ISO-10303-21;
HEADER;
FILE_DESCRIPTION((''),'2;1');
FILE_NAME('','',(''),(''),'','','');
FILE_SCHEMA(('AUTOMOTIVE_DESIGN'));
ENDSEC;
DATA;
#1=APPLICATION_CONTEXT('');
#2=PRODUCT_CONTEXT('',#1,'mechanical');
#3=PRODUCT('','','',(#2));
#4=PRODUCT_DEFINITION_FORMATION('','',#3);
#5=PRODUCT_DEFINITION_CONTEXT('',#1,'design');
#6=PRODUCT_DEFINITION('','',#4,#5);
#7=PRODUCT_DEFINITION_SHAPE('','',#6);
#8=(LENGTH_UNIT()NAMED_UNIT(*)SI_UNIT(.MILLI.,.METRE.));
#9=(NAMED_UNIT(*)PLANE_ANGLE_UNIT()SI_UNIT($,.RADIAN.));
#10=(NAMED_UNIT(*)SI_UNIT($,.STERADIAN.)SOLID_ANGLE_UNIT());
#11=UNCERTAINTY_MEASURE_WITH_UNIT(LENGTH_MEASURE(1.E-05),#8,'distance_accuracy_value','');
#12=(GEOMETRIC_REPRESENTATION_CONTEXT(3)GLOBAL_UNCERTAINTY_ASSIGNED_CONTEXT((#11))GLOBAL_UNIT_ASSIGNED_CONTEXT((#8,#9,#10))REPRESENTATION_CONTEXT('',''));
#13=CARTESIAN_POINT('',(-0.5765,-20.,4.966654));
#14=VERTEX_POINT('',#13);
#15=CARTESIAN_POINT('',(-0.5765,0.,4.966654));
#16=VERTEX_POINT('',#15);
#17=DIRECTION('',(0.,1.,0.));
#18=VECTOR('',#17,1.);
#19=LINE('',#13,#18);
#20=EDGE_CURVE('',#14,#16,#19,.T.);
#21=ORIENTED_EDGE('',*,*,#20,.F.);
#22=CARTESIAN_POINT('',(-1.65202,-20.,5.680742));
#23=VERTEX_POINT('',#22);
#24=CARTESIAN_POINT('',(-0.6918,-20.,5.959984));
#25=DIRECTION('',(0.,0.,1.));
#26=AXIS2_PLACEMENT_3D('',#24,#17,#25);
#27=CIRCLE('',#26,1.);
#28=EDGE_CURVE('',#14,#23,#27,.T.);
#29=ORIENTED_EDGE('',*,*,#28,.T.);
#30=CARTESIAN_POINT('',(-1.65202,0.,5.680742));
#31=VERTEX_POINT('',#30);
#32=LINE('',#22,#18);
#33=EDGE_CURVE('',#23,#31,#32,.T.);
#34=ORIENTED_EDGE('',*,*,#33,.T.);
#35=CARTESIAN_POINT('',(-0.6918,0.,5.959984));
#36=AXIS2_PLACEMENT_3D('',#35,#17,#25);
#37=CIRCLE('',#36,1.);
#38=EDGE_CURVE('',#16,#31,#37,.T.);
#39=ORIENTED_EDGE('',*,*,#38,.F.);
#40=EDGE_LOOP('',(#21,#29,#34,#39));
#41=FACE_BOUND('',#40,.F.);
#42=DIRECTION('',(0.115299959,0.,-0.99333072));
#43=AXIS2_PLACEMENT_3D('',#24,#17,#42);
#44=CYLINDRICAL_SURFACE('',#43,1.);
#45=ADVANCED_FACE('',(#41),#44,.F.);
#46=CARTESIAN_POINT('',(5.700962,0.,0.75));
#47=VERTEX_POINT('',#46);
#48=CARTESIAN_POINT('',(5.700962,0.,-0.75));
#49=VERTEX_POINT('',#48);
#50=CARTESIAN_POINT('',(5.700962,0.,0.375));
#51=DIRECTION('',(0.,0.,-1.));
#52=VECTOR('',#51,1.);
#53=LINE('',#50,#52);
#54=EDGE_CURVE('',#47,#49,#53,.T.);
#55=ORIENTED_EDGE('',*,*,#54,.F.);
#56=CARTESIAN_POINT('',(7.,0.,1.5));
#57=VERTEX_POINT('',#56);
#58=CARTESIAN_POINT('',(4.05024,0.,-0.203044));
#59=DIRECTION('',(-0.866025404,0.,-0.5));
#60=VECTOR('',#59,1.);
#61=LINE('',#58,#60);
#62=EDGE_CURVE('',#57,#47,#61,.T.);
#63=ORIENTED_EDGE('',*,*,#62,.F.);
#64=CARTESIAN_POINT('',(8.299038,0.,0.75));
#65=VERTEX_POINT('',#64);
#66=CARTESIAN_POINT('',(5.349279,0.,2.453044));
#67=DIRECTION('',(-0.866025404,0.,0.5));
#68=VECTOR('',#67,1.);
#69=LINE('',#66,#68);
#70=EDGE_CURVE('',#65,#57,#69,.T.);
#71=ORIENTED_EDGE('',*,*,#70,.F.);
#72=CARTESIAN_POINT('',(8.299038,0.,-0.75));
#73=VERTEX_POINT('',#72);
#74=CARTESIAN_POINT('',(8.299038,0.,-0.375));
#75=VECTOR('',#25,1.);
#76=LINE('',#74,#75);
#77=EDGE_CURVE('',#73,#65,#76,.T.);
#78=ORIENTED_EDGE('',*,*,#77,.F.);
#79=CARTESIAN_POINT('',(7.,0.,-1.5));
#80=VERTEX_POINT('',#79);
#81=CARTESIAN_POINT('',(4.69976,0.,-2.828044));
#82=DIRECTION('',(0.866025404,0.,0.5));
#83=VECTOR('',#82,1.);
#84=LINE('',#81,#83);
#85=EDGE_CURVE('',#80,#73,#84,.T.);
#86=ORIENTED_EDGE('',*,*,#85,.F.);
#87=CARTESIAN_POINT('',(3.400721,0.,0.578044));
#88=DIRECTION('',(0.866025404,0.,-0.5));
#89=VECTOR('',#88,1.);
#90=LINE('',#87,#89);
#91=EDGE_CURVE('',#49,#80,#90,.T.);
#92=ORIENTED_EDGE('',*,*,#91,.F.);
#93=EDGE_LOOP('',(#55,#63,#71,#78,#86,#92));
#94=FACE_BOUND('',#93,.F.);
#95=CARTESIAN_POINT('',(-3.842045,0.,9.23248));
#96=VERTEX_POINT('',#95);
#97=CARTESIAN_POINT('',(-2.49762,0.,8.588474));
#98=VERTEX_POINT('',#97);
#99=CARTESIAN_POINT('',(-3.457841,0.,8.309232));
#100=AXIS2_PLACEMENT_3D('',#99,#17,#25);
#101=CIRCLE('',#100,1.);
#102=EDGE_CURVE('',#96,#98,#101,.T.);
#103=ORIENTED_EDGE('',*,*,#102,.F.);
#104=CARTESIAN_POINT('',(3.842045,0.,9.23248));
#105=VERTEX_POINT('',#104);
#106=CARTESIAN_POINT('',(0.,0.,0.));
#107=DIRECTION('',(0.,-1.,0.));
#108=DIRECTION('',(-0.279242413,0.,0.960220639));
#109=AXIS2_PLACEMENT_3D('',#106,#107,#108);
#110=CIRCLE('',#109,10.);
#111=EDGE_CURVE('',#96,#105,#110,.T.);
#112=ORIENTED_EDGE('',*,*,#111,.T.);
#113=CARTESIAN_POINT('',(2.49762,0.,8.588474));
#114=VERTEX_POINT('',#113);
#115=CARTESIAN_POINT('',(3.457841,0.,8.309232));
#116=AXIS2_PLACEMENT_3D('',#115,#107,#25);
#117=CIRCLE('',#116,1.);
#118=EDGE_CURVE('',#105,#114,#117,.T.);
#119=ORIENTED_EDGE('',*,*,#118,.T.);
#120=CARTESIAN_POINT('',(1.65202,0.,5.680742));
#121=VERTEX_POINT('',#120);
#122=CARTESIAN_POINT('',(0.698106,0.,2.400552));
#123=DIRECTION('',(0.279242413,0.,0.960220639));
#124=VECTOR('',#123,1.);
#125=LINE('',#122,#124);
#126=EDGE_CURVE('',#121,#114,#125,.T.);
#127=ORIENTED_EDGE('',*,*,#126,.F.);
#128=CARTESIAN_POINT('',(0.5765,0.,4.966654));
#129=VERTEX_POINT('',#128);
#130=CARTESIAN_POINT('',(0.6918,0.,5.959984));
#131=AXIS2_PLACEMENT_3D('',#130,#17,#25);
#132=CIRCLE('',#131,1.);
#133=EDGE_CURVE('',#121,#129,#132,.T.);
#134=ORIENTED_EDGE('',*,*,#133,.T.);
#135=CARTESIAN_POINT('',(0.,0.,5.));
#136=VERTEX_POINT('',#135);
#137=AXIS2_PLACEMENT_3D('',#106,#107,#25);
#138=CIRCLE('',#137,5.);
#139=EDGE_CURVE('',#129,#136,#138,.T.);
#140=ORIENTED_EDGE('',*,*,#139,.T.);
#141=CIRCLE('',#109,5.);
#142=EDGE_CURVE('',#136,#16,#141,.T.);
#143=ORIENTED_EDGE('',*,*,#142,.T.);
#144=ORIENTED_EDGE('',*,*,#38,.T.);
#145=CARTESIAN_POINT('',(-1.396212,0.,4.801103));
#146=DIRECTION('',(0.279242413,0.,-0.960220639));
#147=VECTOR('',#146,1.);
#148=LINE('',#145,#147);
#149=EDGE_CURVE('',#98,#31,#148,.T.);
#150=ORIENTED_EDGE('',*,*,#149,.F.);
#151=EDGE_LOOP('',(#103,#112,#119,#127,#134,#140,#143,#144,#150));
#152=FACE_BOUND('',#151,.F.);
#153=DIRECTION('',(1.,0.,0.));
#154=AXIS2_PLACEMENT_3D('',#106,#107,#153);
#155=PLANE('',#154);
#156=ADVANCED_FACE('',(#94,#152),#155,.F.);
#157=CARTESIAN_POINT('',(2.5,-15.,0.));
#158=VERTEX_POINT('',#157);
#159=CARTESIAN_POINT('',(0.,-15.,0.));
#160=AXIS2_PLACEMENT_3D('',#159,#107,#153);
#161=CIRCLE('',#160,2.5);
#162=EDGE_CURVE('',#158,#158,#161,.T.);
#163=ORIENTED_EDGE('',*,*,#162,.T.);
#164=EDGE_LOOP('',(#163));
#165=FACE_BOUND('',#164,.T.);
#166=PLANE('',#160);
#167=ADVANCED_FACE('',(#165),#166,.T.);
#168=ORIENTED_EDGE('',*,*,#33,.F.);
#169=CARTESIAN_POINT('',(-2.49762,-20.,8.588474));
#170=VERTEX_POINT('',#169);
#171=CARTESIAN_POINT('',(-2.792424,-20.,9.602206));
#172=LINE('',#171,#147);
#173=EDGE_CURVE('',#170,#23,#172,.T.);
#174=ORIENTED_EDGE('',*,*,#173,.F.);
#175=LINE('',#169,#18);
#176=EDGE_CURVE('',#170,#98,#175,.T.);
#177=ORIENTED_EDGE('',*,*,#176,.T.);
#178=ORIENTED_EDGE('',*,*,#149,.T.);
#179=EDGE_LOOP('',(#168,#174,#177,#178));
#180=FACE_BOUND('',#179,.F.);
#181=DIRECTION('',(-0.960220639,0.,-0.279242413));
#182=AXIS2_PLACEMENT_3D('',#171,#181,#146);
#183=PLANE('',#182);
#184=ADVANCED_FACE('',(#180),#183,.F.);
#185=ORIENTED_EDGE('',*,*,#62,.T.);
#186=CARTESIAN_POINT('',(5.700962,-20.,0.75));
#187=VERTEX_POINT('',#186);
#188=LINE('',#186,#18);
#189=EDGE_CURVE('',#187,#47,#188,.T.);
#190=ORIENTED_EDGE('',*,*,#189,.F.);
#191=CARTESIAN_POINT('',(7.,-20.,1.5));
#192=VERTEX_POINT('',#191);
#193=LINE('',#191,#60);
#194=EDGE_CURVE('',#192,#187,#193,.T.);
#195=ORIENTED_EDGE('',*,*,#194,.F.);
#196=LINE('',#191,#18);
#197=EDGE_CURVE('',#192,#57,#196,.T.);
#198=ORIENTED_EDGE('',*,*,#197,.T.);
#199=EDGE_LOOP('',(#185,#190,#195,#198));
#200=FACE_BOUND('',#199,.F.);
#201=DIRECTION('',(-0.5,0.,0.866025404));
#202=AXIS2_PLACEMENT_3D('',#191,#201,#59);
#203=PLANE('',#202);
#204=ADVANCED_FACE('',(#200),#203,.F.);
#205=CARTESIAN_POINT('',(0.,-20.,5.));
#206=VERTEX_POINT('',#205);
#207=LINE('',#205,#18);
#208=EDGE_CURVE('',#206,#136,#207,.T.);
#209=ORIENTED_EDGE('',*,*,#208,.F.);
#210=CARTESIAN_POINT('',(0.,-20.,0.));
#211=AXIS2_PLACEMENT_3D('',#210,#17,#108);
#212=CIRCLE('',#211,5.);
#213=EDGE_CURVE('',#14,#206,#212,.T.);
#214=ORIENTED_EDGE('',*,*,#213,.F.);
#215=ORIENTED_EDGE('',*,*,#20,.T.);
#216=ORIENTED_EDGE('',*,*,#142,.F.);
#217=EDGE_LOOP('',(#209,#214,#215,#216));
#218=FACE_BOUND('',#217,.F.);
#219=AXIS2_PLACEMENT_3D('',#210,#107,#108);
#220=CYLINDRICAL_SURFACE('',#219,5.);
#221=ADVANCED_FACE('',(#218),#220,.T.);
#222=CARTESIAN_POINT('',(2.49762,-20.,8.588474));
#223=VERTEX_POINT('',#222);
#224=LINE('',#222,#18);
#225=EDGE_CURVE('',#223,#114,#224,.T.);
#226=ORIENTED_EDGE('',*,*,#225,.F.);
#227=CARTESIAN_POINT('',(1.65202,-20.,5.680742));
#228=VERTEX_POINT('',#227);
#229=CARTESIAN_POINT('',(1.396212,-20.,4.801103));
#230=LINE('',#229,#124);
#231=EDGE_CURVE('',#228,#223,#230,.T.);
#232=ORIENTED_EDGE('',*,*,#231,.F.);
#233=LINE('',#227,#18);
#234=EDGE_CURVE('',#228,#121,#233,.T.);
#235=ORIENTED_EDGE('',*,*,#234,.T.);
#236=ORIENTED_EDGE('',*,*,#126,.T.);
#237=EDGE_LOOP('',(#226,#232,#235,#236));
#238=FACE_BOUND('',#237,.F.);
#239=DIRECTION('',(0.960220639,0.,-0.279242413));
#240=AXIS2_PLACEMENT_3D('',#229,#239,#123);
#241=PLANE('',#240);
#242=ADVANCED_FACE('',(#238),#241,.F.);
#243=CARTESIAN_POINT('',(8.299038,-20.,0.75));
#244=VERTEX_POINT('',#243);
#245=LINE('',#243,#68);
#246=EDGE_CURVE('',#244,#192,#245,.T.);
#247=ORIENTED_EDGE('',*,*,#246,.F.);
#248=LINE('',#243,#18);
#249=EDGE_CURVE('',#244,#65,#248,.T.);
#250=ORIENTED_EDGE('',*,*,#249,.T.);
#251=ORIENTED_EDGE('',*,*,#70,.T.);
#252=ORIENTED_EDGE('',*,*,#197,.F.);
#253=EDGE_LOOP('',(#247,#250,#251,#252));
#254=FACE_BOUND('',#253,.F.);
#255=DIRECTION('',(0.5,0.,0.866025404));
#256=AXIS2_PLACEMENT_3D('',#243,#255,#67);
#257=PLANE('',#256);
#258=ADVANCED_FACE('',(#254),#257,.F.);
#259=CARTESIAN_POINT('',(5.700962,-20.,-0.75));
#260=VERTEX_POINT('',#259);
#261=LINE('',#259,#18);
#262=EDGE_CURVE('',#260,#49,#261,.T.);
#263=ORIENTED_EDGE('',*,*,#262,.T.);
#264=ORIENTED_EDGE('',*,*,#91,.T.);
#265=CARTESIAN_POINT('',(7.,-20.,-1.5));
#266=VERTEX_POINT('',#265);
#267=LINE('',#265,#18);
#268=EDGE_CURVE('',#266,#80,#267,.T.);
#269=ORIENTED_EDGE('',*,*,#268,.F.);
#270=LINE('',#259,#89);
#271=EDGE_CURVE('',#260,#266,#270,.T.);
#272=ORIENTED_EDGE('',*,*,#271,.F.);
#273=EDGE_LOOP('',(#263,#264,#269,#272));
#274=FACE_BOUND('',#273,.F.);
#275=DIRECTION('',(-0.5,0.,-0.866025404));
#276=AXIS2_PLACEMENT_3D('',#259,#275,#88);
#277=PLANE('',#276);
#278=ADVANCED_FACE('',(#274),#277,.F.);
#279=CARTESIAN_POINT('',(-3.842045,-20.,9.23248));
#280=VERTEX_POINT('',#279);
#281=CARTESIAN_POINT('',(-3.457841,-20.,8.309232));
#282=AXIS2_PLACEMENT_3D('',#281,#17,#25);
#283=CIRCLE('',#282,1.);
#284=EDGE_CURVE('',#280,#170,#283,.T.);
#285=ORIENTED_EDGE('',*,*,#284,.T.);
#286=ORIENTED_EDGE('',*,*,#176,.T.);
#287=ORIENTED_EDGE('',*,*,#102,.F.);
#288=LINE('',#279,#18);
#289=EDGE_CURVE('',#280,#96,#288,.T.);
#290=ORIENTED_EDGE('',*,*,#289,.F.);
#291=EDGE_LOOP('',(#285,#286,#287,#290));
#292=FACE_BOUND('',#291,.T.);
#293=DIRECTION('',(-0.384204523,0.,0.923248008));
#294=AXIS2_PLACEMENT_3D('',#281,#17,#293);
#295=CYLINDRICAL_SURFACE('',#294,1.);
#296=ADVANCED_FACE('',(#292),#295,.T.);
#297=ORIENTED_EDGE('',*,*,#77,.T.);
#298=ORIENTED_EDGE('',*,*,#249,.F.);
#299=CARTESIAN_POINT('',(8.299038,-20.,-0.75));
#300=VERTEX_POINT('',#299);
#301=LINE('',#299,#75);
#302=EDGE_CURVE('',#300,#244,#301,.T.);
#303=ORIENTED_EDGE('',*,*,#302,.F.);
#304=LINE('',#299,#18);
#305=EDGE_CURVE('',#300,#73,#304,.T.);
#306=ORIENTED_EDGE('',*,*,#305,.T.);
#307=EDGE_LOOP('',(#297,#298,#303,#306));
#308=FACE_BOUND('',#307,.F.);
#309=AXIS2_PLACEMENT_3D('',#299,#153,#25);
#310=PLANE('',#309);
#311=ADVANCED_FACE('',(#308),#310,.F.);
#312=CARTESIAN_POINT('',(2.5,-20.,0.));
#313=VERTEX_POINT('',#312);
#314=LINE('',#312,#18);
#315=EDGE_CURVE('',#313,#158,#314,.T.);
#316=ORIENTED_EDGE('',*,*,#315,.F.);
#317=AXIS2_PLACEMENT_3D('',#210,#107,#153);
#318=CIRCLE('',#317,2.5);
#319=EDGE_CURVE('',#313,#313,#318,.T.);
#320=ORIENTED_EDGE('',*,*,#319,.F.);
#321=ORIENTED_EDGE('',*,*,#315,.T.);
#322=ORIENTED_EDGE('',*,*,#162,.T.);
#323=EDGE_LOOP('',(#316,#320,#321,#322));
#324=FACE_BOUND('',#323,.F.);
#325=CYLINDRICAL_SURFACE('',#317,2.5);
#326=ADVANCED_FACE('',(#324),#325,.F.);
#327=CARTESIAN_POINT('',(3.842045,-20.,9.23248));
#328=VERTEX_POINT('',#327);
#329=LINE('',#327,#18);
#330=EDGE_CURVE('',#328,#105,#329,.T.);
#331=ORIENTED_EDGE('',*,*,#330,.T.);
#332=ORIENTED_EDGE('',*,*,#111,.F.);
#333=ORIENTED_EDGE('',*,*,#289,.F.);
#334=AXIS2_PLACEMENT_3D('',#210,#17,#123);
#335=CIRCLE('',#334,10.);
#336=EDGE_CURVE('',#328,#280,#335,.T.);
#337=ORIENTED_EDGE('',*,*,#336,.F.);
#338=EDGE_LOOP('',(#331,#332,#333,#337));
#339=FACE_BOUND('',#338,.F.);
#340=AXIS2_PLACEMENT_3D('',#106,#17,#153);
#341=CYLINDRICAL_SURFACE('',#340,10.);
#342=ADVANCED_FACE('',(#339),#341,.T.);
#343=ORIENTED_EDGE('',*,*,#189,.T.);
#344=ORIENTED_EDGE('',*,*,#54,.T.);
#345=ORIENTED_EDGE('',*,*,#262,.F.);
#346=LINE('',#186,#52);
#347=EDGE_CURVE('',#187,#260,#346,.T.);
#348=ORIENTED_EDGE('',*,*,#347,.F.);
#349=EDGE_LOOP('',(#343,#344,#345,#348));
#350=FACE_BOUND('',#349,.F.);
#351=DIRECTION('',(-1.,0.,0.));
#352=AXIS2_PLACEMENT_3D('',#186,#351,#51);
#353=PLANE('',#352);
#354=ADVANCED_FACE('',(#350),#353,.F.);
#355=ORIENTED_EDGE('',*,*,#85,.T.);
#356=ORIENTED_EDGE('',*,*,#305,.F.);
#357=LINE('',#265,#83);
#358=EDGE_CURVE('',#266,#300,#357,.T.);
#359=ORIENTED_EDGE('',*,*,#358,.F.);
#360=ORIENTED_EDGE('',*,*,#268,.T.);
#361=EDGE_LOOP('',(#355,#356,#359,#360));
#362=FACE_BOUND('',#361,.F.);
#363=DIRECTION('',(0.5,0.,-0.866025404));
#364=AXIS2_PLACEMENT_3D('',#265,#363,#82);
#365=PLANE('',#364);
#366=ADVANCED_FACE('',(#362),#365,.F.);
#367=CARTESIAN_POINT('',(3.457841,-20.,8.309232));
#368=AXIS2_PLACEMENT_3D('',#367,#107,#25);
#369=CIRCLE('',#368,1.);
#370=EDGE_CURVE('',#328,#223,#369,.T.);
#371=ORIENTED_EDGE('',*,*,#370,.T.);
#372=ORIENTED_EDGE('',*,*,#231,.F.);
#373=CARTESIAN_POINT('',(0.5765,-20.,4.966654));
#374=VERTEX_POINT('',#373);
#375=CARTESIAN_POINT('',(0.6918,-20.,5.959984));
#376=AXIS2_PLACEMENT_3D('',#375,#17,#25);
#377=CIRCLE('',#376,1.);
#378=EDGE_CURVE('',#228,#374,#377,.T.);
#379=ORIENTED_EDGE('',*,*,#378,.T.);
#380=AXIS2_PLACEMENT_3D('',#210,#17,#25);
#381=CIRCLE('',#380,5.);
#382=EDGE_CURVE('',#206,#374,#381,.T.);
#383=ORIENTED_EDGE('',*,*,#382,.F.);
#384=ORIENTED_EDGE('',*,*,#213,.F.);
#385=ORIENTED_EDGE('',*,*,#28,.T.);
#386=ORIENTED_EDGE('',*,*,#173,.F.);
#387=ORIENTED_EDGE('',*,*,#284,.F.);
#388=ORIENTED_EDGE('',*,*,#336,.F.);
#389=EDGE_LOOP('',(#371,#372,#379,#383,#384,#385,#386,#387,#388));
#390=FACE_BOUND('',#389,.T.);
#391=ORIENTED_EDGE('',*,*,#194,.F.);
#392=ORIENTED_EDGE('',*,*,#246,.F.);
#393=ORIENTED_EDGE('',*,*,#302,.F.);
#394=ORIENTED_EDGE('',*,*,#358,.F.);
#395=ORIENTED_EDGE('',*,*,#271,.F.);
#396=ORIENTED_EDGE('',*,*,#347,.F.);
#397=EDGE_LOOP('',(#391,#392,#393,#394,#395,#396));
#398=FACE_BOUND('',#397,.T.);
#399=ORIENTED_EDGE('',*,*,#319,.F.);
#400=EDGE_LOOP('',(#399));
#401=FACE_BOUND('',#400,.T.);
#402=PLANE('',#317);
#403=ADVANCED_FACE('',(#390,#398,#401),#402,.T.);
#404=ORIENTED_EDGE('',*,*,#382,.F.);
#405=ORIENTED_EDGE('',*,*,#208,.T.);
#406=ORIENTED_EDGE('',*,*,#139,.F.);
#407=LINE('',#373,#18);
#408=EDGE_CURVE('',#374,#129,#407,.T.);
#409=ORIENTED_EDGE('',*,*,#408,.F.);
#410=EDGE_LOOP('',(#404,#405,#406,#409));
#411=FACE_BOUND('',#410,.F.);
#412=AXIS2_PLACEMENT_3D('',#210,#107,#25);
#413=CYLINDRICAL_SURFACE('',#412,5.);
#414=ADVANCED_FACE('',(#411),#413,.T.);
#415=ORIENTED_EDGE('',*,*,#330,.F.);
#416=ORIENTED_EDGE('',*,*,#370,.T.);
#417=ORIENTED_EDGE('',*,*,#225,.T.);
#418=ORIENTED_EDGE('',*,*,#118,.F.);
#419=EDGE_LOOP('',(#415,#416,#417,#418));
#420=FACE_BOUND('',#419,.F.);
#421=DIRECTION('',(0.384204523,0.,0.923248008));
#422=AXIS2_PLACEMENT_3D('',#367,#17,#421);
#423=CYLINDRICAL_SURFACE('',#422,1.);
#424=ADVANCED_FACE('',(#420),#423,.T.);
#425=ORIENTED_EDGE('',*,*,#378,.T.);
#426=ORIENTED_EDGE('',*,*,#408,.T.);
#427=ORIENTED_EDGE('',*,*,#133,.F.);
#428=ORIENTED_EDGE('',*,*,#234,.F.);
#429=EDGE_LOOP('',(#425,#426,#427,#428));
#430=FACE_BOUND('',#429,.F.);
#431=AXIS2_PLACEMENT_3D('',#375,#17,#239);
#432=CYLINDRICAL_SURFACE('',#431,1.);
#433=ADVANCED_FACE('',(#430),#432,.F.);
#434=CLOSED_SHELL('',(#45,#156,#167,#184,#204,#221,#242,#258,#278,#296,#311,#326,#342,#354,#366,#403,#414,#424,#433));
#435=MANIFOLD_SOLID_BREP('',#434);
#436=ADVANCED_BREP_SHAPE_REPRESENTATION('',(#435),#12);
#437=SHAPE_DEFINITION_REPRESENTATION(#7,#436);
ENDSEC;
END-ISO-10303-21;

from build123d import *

# Parameters (mm, degrees)
F0_R      = 10
F1_DEPTH  = 20
F2_R      = 2.5
F3_DEPTH  = 5
F13_DEPTH = 20.001
F4_R      = 1
F6_DEPTH  = 20.001
F9_R      = 5.3210242514
F10_DEPTH = 25


# Not quite as in the source:
# - the program builds the solid bodies; features that only make, move or delete a surface that nothing else refers to are left out


with BuildPart() as f1:
    # F0 (on Front) → F1 (new body)
    with BuildSketch(Plane.XZ):
        Circle(F0_R)
    extrude(amount=F1_DEPTH)

    # F2 (on face) → F3 (cut)
    with BuildSketch(Plane.XZ.offset(20)):
        Circle(F2_R)
    extrude(amount=-F3_DEPTH, mode=Mode.SUBTRACT)

    # F12 (on face) → F13 (cut, through all)
    with BuildSketch(Plane.XZ.offset(20)):
        with BuildLine():
            ThreePointArc((2.7924241272, 9.6022063868), (1.4103077913, 9.9000521177), (0, 10))
            Line((0, 10), (0, 5))
            ThreePointArc((0, 5), (0.7051538957, 4.9500260589), (1.3962120636, 4.8011031934))
            Line((1.3962120636, 4.8011031934), (2.7924241272, 9.6022063868))
        make_face()
        with BuildLine():
            Line((0, 5), (0, 10))
            ThreePointArc((0, 10), (-1.4103077913, 9.9000521177), (-2.7924241272, 9.6022063868))
            Line((-2.7924241272, 9.6022063868), (-1.3962120636, 4.8011031934))
            ThreePointArc((-1.3962120636, 4.8011031934), (-0.7051538957, 4.9500260589), (0, 5))
        make_face()
    extrude(amount=-F13_DEPTH, mode=Mode.SUBTRACT)

    # F4
    f4_edges = [f1.edges().sort_by_distance(p)[0] for p in [
        (-2.792424, -10, 9.602206),
        (2.792424, -10, 9.602206),
        (-1.396212, -10, 4.801103),
        (1.396212, -10, 4.801103),
    ]]
    fillet(f4_edges, radius=F4_R)

    # F5 (on face) → F6 (cut, through all)
    with BuildSketch(Plane.XZ.offset(20)):
        Polygon((8.2990381057, 0.75), (7, 1.5), (5.7009618943, 0.75), (5.7009618943, -0.75), (7, -1.5), (8.2990381057, -0.75), align=None)
    extrude(amount=-F6_DEPTH, mode=Mode.SUBTRACT)

    # F9 (on face) → F10 (cut)
    with BuildSketch(Plane(origin=(0, 0, 0), x_dir=(-1, 0, 0), z_dir=(0, 1, 0))):
        with Locations((11.770372279, -20.3817021102)):
            Circle(F9_R)
    extrude(amount=-F10_DEPTH, mode=Mode.SUBTRACT)


solid = f1.part
